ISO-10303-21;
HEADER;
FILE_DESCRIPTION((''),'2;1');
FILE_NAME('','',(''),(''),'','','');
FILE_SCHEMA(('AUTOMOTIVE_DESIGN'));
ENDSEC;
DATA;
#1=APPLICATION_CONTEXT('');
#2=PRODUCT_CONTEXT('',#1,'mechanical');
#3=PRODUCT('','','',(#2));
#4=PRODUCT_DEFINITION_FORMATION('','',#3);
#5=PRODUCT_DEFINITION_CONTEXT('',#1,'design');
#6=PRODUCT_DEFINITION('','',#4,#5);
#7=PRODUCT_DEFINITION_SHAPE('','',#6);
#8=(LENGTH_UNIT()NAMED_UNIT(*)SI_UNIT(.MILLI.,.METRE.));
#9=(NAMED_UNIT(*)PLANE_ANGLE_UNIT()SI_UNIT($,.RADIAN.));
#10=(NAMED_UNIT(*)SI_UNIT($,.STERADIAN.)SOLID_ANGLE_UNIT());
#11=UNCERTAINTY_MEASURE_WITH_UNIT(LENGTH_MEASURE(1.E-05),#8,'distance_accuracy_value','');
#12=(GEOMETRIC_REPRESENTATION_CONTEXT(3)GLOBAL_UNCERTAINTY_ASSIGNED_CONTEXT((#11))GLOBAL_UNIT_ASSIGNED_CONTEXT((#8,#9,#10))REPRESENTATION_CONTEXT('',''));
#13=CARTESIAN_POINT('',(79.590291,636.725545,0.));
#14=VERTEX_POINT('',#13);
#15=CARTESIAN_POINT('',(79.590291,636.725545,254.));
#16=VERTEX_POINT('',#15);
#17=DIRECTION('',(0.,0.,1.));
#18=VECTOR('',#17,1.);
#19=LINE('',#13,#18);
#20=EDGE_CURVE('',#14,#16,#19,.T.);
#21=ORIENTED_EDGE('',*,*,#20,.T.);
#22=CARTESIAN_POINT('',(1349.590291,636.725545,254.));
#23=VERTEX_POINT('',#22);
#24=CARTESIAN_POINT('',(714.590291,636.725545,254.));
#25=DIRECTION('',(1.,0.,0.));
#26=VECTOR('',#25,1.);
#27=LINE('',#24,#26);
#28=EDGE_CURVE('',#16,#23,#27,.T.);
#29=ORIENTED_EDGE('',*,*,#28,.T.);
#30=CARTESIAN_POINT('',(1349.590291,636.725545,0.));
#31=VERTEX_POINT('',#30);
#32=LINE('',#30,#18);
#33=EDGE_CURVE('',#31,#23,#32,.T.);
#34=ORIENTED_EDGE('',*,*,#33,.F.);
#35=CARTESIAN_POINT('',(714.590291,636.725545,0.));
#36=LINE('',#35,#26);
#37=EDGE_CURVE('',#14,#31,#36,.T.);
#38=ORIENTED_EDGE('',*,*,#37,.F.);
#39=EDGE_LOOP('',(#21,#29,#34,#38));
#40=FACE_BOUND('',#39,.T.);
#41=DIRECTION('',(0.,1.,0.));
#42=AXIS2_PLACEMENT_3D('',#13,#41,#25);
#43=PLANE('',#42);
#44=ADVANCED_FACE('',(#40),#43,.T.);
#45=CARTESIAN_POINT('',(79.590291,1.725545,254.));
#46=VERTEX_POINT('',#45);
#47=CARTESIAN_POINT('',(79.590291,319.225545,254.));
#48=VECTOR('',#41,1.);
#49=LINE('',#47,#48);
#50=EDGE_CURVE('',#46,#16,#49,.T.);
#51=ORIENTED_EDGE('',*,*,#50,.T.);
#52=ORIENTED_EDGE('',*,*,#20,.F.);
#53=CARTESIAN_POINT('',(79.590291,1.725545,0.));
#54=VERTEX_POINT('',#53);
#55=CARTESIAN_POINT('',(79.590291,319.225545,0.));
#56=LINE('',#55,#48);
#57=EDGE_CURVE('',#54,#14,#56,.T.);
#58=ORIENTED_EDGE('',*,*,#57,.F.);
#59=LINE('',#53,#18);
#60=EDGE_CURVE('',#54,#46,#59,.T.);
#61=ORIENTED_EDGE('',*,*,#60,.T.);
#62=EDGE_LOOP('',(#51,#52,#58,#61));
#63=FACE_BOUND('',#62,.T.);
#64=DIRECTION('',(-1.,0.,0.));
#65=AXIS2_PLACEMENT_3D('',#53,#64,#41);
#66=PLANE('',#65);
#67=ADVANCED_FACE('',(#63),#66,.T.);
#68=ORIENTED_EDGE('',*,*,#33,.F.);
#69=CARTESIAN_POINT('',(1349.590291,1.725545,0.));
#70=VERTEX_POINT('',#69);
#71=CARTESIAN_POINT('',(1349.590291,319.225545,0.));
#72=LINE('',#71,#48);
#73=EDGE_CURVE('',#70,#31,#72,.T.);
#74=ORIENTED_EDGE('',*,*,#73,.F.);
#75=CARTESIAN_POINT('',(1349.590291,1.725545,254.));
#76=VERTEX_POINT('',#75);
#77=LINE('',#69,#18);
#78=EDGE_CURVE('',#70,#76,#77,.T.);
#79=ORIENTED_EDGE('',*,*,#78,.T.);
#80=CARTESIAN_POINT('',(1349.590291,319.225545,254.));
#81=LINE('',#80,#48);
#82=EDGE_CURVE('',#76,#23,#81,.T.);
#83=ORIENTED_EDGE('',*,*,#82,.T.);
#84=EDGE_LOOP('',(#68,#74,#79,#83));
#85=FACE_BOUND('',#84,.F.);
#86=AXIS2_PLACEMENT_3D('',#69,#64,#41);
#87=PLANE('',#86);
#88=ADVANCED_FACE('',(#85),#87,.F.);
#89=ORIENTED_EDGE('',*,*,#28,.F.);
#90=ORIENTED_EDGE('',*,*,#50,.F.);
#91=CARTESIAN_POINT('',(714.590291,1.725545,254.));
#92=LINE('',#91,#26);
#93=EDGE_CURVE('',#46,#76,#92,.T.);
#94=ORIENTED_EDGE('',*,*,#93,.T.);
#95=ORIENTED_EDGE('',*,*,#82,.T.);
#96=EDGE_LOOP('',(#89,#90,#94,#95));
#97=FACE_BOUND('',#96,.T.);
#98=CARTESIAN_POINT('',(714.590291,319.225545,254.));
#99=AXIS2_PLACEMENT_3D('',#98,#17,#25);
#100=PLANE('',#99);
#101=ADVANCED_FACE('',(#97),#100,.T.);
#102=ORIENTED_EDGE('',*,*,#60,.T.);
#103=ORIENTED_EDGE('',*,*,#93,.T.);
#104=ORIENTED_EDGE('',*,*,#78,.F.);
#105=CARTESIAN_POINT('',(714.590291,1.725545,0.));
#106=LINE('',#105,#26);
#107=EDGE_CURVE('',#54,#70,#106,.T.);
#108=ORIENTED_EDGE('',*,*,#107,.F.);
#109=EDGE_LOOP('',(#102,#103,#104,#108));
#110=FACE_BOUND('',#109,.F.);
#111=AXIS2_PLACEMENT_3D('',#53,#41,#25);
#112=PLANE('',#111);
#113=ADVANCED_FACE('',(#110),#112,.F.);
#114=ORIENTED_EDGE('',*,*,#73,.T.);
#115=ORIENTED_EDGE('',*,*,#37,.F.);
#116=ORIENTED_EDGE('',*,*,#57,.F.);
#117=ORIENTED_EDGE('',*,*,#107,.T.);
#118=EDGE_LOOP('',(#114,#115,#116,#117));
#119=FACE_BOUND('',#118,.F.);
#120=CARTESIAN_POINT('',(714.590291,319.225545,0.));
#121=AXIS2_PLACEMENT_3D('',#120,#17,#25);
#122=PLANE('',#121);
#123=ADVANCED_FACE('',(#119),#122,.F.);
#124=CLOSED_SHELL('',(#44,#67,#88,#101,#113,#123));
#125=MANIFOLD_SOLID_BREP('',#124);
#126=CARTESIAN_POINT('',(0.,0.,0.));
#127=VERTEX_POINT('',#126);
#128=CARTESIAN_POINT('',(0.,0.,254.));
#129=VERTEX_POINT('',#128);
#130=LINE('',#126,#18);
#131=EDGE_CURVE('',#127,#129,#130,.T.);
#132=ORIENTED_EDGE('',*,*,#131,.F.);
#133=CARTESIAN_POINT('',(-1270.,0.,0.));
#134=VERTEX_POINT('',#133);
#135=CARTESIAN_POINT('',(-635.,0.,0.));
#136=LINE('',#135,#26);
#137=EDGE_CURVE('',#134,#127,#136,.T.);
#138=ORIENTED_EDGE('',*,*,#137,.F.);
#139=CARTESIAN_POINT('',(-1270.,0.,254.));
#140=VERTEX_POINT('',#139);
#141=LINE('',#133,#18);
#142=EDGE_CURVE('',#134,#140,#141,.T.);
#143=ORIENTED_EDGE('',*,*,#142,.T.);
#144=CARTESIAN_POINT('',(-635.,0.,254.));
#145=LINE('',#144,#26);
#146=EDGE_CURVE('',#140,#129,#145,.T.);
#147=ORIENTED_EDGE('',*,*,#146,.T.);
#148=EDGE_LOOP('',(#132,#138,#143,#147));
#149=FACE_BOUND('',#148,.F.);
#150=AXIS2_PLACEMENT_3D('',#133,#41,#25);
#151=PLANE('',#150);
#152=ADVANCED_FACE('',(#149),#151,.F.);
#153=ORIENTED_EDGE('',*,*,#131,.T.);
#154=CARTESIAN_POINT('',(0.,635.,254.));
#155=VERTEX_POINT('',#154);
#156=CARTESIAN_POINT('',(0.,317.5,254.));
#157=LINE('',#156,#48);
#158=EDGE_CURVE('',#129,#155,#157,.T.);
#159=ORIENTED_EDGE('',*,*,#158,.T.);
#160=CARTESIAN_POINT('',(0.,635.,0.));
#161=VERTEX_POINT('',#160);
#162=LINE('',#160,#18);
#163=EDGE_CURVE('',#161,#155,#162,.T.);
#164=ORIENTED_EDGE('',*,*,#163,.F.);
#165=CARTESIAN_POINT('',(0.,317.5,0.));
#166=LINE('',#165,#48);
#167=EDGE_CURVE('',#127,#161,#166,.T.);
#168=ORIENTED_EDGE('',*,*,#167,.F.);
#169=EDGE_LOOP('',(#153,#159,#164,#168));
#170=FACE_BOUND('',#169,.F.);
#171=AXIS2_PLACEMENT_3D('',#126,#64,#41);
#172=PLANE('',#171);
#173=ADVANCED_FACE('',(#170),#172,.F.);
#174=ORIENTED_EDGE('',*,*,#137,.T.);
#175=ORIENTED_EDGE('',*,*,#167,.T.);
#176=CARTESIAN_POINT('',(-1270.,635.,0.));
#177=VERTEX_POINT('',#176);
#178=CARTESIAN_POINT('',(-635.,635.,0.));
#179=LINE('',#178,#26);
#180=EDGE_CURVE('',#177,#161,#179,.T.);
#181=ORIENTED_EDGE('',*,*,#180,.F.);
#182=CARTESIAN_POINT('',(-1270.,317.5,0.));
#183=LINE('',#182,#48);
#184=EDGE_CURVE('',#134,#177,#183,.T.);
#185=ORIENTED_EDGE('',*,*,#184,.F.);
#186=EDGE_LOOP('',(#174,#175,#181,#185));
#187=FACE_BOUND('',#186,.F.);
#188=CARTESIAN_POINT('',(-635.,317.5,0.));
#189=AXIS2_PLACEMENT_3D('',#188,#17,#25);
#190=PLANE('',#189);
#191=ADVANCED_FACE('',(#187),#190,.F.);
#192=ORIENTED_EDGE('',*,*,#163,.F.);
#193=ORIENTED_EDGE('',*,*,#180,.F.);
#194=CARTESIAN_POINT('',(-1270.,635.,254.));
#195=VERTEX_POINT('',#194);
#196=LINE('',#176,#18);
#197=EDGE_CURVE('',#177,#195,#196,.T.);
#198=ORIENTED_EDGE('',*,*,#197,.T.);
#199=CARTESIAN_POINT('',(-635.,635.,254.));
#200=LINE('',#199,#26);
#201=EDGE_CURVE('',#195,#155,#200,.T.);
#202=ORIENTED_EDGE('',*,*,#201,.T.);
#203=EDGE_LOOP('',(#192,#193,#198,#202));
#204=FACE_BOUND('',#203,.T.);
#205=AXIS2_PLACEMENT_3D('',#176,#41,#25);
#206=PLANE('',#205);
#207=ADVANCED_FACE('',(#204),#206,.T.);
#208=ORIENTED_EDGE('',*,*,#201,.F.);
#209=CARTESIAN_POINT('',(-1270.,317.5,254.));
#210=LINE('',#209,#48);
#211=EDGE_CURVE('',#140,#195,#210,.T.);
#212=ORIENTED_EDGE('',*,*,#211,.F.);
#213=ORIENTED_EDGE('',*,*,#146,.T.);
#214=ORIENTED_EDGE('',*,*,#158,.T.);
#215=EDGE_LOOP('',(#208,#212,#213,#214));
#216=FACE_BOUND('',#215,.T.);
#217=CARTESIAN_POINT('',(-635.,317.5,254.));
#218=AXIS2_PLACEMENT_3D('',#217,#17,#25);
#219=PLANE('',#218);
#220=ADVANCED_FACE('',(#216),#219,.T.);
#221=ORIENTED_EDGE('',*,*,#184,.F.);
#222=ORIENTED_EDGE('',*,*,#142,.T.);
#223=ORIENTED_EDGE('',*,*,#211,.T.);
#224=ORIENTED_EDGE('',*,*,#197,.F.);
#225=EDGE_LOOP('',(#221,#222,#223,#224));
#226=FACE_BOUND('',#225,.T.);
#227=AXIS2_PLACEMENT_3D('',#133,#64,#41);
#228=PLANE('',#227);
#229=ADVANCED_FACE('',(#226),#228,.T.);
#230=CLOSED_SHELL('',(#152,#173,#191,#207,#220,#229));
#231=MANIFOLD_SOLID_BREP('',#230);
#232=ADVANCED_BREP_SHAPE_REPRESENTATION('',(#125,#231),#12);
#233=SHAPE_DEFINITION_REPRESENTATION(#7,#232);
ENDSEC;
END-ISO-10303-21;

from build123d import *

# Parameters (mm, degrees)
F1_W     = 1270
F1_H     = 635
F2_DEPTH = 254


# Not quite as in the source:
# - a variable given as a bare number and used for a length is read in inches; the dataset says mm whatever the document's units were


with BuildPart() as f2:
    # F1 (on Top) → F2 (new body)
    with BuildSketch(Plane.XY):
        with Locations((-635, 317.5)):
            Rectangle(F1_W, F1_H)
    extrude(amount=F2_DEPTH)


with BuildPart() as f2b:
    # F1 (on Top) → F2, piece 2 (new body)
    with BuildSketch(Plane.XY):
        with Locations((714.5902907848, 319.2255449295)):
            Rectangle(F1_W, F1_H)
    extrude(amount=F2_DEPTH)


solid = Compound([f2.part, f2b.part])
